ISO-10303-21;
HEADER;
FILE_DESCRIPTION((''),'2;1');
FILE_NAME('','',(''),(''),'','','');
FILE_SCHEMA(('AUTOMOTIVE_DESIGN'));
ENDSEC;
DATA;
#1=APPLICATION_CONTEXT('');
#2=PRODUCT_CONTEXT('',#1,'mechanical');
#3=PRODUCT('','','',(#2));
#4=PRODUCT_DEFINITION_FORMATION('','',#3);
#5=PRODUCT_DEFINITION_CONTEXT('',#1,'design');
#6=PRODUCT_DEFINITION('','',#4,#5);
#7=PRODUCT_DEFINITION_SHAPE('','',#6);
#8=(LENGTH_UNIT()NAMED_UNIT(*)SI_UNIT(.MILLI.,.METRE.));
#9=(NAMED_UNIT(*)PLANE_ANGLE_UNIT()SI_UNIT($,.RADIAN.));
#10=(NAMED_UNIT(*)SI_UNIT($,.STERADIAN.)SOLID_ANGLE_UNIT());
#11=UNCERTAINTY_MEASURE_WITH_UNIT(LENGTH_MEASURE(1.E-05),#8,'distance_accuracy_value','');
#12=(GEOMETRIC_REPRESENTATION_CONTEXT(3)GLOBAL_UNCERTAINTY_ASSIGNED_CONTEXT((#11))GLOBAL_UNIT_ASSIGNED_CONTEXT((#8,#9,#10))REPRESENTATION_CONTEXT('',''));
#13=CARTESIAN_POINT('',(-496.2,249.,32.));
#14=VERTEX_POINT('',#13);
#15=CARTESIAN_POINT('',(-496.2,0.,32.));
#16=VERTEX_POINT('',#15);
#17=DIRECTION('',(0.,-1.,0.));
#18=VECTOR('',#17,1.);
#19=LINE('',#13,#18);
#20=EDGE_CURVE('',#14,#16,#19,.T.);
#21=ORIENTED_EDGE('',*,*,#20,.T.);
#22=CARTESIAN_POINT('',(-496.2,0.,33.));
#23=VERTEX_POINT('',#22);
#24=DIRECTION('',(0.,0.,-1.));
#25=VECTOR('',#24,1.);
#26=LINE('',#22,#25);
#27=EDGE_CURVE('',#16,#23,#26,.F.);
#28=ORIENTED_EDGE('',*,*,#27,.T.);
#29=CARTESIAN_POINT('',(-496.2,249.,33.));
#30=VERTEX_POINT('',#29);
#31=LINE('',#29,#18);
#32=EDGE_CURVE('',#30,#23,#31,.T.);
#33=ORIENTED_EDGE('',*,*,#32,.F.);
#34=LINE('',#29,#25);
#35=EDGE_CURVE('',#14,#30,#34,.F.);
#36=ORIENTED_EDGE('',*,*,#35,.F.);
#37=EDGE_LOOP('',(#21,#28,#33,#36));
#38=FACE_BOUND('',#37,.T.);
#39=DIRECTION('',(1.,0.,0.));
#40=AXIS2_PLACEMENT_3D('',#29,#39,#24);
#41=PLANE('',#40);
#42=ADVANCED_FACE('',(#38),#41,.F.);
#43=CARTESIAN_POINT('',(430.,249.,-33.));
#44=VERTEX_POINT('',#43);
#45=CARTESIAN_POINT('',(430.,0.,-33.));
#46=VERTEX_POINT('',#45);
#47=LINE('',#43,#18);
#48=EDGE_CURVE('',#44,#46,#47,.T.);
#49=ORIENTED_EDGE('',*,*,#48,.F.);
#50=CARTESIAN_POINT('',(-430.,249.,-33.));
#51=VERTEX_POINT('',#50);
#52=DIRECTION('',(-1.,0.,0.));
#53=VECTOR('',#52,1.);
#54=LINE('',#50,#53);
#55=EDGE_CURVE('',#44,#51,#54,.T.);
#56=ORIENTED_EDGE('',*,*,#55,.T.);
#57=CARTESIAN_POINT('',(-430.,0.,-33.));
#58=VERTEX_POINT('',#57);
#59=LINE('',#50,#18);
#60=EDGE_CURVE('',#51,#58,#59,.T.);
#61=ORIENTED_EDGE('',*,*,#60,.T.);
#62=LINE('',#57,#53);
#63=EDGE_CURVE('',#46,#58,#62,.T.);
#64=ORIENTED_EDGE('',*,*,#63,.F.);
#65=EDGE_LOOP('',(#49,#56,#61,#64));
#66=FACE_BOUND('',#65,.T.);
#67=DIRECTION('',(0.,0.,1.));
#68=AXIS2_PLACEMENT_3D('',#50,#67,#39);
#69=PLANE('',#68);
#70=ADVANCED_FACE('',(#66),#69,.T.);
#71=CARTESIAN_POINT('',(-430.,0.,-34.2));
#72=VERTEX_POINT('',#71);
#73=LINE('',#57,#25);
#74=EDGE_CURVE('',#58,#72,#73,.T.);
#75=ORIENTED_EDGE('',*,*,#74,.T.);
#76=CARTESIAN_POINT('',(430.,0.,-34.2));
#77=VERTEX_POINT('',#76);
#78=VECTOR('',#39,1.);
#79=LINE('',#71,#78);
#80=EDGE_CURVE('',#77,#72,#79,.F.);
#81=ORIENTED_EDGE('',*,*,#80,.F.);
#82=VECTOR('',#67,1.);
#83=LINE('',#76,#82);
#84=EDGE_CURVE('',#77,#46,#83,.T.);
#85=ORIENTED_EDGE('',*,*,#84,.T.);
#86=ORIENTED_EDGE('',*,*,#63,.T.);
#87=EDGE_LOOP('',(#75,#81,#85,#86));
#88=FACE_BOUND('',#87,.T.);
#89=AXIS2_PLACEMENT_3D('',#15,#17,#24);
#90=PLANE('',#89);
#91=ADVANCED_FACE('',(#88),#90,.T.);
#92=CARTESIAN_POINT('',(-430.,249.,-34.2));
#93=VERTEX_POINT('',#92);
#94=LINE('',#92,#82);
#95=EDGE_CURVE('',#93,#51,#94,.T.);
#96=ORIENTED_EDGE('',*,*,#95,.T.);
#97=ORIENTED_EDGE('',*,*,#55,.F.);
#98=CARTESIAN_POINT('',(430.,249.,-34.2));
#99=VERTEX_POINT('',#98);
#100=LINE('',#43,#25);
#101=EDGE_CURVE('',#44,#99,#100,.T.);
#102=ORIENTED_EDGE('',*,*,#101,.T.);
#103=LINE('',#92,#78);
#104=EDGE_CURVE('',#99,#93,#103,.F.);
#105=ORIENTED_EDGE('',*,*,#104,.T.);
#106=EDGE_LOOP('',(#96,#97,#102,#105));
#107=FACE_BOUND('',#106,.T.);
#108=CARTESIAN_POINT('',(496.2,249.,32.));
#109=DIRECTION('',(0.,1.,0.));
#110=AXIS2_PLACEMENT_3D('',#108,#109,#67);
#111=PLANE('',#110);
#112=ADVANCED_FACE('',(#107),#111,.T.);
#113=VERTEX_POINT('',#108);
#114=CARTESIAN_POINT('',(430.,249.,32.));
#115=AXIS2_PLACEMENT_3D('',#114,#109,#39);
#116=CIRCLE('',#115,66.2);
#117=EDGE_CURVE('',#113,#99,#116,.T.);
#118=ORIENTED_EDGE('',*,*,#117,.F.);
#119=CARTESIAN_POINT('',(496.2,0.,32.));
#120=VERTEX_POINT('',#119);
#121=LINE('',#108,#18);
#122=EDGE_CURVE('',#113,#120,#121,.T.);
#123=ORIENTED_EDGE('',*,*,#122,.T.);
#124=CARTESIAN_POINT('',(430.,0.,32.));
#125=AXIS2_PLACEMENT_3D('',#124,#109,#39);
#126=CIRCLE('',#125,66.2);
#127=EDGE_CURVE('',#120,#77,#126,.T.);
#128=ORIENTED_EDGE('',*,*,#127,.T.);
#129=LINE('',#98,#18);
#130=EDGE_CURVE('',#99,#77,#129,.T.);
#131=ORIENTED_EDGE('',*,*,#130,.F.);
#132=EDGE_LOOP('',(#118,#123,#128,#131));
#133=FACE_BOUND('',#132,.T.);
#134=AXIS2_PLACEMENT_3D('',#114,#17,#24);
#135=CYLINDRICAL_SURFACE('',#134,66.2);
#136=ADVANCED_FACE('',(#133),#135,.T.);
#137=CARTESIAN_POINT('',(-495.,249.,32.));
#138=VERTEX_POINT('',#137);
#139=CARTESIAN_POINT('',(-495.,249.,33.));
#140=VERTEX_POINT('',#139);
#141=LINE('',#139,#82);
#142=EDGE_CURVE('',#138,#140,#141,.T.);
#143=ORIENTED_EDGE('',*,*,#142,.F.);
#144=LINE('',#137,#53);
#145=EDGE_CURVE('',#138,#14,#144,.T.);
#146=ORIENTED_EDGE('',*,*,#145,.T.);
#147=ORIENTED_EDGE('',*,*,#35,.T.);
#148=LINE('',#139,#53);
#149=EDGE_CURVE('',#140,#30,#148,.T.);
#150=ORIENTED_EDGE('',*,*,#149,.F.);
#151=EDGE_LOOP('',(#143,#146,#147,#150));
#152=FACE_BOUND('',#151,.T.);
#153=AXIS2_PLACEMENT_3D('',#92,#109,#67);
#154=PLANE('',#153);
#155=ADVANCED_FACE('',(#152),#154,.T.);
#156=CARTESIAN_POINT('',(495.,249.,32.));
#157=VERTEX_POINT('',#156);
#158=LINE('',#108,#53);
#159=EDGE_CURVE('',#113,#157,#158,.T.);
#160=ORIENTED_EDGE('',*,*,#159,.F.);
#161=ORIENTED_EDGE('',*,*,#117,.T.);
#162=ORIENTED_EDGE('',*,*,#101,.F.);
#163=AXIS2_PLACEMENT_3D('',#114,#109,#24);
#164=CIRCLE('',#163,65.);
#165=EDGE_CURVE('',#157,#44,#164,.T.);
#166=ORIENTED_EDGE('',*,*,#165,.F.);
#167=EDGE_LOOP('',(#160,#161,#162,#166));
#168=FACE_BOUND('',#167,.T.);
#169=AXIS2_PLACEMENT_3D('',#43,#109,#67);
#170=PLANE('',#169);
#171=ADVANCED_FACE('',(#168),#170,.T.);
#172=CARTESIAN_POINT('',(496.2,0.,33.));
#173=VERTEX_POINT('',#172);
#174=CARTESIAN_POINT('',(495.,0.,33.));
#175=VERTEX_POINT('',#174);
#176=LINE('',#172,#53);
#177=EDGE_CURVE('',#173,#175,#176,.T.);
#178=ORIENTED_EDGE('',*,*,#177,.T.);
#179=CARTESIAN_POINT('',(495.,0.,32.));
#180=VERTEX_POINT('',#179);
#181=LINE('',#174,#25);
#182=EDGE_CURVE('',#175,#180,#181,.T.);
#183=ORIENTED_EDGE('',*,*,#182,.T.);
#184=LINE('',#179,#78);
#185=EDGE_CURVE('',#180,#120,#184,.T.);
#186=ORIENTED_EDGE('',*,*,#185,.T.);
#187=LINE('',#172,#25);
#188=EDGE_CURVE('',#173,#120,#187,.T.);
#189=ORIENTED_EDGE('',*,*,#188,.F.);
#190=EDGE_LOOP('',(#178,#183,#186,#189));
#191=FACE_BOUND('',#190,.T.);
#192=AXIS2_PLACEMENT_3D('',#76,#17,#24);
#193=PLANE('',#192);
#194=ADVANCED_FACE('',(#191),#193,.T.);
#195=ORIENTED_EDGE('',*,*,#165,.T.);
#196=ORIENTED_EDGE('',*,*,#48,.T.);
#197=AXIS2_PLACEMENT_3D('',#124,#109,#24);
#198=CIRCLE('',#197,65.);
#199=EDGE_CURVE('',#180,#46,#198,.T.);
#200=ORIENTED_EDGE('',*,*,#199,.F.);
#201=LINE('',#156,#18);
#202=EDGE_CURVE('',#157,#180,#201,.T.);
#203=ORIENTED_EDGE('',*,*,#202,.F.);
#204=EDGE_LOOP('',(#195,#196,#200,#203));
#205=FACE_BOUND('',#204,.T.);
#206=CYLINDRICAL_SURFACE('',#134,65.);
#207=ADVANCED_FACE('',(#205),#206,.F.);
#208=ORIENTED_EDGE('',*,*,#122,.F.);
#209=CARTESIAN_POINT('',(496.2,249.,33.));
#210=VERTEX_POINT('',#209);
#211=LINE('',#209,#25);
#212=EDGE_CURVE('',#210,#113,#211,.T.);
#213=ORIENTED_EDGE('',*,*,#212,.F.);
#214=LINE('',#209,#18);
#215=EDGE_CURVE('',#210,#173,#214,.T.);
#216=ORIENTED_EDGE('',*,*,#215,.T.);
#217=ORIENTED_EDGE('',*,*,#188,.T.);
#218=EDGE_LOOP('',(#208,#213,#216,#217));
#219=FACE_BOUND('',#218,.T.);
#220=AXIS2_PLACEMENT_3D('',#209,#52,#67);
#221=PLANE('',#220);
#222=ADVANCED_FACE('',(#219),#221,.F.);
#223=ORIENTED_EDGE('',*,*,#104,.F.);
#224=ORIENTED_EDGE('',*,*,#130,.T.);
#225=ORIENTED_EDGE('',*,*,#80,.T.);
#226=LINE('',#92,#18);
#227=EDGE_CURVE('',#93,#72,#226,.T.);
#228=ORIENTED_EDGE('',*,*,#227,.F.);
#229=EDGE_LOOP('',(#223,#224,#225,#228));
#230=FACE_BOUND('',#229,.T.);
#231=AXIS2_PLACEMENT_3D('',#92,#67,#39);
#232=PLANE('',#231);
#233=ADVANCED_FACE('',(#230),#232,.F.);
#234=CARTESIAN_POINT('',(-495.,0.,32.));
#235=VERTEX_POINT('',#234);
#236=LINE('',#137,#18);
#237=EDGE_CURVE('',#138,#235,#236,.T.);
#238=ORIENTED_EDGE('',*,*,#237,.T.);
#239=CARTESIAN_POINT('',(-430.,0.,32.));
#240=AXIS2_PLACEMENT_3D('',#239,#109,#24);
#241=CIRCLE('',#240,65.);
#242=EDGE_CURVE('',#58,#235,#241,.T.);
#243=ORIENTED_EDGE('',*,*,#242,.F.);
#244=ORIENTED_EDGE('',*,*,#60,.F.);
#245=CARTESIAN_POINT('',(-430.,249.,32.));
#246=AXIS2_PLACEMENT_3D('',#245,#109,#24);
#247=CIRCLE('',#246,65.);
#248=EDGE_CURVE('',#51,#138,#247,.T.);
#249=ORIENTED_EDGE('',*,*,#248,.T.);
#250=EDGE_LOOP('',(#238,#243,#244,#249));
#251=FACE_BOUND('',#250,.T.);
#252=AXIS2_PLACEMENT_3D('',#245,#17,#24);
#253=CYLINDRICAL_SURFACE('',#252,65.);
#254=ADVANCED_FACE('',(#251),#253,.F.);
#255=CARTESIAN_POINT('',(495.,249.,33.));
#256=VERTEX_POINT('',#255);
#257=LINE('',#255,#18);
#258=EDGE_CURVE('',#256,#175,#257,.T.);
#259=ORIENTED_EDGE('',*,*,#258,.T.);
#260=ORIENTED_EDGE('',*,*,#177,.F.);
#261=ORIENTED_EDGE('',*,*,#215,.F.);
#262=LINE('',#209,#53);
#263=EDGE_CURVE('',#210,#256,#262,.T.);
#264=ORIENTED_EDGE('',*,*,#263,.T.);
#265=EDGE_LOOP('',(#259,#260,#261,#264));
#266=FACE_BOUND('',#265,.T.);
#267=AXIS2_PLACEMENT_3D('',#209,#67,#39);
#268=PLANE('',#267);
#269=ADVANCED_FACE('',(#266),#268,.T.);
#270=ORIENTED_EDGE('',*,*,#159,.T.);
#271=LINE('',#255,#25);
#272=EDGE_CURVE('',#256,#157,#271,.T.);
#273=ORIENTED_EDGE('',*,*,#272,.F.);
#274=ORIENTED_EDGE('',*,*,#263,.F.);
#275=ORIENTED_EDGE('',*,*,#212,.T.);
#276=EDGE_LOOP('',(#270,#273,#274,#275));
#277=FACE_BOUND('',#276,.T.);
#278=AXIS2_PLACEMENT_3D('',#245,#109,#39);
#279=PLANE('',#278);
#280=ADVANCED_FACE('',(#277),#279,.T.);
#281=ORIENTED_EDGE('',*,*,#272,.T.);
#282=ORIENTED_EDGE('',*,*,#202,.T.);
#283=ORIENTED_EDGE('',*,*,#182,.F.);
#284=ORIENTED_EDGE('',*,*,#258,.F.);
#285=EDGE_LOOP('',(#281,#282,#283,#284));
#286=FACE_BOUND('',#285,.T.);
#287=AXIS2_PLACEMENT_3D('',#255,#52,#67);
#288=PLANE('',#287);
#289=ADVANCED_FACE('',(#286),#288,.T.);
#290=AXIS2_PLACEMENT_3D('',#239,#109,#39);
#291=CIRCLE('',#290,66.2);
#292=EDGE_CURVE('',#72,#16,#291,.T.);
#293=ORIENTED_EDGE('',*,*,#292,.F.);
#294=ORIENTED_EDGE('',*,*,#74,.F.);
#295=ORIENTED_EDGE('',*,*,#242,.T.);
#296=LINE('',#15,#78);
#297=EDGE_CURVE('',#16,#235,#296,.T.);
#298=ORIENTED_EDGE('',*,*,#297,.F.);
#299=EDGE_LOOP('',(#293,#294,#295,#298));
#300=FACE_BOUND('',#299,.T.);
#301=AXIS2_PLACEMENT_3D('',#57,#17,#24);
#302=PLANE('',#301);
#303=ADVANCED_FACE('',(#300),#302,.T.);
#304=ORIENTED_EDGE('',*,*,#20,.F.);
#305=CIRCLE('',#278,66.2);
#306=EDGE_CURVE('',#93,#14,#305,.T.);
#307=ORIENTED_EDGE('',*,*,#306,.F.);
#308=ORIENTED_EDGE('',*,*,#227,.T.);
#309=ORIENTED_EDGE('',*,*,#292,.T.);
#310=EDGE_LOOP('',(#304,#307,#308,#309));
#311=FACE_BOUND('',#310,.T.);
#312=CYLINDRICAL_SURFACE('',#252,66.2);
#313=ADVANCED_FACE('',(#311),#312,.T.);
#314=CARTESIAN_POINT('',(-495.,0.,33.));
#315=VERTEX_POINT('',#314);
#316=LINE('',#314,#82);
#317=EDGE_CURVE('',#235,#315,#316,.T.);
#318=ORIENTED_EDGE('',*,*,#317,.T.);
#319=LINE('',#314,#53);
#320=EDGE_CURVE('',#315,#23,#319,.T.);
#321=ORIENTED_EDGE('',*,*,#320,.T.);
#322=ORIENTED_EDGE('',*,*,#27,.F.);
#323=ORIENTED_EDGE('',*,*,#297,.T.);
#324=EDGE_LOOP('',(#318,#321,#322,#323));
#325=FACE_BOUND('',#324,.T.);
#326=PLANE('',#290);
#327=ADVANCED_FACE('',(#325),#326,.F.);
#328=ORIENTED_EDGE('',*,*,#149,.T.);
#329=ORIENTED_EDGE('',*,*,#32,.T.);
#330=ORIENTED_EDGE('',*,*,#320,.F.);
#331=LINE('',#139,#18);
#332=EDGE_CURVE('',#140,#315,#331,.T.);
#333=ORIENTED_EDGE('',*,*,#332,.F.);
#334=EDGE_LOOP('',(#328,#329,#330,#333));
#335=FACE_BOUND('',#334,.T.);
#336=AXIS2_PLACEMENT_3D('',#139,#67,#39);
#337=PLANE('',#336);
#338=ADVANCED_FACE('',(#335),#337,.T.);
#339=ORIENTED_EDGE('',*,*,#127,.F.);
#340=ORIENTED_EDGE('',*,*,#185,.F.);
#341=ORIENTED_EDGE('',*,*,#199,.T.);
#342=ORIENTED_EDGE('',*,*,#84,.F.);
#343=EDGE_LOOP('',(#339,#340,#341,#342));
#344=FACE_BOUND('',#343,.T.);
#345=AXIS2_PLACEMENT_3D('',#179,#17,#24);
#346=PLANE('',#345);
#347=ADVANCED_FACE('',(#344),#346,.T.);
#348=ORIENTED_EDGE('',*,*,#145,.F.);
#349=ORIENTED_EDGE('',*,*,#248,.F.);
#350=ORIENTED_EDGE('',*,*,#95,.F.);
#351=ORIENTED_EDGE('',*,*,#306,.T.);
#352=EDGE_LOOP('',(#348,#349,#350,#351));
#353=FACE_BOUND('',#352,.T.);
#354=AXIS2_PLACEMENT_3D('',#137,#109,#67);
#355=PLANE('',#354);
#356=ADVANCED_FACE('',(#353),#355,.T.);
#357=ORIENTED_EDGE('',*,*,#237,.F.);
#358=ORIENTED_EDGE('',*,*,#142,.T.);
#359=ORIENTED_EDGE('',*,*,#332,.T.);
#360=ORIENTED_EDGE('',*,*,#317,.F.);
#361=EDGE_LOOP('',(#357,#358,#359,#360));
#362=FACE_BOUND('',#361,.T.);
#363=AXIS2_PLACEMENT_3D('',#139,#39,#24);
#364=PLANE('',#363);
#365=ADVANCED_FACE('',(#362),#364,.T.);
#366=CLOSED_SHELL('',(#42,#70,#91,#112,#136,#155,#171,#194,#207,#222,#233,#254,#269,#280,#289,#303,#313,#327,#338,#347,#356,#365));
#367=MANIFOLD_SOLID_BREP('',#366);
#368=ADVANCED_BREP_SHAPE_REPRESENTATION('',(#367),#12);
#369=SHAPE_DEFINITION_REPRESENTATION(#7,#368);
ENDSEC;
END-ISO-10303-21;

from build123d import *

# Parameters (mm, degrees)
BASE_FLANGE1_DEPTH = 249


# Sheet-metal steps are written as plain solids
with BuildPart() as part:
    # Sketch1 → Base-Flange1 (new body)
    with BuildSketch(Plane(origin=(0, 0, 0), x_dir=(1, 0, 0), z_dir=(0, 1, 0))):
        with BuildLine():
            Line((-495, -33), (-495, -32))
            ThreePointArc((-495, -32), (-475.961940777, 13.961940777), (-430, 33))
            Line((-430, 33), (430, 33))
            ThreePointArc((430, 33), (475.961940777, 13.961940777), (495, -32))
            Line((495, -32), (495, -33))
            Line((495, -33), (496.2, -33))
            Line((496.2, -33), (496.2, -32))
            ThreePointArc((496.2, -32), (476.810468915, 14.810468915), (430, 34.2))
            Line((430, 34.2), (-430, 34.2))
            ThreePointArc((-430, 34.2), (-476.810468915, 14.810468915), (-496.2, -32))
            Line((-496.2, -32), (-496.2, -33))
            Line((-496.2, -33), (-495, -33))
        make_face()
    extrude(amount=BASE_FLANGE1_DEPTH)


solid = part.part
